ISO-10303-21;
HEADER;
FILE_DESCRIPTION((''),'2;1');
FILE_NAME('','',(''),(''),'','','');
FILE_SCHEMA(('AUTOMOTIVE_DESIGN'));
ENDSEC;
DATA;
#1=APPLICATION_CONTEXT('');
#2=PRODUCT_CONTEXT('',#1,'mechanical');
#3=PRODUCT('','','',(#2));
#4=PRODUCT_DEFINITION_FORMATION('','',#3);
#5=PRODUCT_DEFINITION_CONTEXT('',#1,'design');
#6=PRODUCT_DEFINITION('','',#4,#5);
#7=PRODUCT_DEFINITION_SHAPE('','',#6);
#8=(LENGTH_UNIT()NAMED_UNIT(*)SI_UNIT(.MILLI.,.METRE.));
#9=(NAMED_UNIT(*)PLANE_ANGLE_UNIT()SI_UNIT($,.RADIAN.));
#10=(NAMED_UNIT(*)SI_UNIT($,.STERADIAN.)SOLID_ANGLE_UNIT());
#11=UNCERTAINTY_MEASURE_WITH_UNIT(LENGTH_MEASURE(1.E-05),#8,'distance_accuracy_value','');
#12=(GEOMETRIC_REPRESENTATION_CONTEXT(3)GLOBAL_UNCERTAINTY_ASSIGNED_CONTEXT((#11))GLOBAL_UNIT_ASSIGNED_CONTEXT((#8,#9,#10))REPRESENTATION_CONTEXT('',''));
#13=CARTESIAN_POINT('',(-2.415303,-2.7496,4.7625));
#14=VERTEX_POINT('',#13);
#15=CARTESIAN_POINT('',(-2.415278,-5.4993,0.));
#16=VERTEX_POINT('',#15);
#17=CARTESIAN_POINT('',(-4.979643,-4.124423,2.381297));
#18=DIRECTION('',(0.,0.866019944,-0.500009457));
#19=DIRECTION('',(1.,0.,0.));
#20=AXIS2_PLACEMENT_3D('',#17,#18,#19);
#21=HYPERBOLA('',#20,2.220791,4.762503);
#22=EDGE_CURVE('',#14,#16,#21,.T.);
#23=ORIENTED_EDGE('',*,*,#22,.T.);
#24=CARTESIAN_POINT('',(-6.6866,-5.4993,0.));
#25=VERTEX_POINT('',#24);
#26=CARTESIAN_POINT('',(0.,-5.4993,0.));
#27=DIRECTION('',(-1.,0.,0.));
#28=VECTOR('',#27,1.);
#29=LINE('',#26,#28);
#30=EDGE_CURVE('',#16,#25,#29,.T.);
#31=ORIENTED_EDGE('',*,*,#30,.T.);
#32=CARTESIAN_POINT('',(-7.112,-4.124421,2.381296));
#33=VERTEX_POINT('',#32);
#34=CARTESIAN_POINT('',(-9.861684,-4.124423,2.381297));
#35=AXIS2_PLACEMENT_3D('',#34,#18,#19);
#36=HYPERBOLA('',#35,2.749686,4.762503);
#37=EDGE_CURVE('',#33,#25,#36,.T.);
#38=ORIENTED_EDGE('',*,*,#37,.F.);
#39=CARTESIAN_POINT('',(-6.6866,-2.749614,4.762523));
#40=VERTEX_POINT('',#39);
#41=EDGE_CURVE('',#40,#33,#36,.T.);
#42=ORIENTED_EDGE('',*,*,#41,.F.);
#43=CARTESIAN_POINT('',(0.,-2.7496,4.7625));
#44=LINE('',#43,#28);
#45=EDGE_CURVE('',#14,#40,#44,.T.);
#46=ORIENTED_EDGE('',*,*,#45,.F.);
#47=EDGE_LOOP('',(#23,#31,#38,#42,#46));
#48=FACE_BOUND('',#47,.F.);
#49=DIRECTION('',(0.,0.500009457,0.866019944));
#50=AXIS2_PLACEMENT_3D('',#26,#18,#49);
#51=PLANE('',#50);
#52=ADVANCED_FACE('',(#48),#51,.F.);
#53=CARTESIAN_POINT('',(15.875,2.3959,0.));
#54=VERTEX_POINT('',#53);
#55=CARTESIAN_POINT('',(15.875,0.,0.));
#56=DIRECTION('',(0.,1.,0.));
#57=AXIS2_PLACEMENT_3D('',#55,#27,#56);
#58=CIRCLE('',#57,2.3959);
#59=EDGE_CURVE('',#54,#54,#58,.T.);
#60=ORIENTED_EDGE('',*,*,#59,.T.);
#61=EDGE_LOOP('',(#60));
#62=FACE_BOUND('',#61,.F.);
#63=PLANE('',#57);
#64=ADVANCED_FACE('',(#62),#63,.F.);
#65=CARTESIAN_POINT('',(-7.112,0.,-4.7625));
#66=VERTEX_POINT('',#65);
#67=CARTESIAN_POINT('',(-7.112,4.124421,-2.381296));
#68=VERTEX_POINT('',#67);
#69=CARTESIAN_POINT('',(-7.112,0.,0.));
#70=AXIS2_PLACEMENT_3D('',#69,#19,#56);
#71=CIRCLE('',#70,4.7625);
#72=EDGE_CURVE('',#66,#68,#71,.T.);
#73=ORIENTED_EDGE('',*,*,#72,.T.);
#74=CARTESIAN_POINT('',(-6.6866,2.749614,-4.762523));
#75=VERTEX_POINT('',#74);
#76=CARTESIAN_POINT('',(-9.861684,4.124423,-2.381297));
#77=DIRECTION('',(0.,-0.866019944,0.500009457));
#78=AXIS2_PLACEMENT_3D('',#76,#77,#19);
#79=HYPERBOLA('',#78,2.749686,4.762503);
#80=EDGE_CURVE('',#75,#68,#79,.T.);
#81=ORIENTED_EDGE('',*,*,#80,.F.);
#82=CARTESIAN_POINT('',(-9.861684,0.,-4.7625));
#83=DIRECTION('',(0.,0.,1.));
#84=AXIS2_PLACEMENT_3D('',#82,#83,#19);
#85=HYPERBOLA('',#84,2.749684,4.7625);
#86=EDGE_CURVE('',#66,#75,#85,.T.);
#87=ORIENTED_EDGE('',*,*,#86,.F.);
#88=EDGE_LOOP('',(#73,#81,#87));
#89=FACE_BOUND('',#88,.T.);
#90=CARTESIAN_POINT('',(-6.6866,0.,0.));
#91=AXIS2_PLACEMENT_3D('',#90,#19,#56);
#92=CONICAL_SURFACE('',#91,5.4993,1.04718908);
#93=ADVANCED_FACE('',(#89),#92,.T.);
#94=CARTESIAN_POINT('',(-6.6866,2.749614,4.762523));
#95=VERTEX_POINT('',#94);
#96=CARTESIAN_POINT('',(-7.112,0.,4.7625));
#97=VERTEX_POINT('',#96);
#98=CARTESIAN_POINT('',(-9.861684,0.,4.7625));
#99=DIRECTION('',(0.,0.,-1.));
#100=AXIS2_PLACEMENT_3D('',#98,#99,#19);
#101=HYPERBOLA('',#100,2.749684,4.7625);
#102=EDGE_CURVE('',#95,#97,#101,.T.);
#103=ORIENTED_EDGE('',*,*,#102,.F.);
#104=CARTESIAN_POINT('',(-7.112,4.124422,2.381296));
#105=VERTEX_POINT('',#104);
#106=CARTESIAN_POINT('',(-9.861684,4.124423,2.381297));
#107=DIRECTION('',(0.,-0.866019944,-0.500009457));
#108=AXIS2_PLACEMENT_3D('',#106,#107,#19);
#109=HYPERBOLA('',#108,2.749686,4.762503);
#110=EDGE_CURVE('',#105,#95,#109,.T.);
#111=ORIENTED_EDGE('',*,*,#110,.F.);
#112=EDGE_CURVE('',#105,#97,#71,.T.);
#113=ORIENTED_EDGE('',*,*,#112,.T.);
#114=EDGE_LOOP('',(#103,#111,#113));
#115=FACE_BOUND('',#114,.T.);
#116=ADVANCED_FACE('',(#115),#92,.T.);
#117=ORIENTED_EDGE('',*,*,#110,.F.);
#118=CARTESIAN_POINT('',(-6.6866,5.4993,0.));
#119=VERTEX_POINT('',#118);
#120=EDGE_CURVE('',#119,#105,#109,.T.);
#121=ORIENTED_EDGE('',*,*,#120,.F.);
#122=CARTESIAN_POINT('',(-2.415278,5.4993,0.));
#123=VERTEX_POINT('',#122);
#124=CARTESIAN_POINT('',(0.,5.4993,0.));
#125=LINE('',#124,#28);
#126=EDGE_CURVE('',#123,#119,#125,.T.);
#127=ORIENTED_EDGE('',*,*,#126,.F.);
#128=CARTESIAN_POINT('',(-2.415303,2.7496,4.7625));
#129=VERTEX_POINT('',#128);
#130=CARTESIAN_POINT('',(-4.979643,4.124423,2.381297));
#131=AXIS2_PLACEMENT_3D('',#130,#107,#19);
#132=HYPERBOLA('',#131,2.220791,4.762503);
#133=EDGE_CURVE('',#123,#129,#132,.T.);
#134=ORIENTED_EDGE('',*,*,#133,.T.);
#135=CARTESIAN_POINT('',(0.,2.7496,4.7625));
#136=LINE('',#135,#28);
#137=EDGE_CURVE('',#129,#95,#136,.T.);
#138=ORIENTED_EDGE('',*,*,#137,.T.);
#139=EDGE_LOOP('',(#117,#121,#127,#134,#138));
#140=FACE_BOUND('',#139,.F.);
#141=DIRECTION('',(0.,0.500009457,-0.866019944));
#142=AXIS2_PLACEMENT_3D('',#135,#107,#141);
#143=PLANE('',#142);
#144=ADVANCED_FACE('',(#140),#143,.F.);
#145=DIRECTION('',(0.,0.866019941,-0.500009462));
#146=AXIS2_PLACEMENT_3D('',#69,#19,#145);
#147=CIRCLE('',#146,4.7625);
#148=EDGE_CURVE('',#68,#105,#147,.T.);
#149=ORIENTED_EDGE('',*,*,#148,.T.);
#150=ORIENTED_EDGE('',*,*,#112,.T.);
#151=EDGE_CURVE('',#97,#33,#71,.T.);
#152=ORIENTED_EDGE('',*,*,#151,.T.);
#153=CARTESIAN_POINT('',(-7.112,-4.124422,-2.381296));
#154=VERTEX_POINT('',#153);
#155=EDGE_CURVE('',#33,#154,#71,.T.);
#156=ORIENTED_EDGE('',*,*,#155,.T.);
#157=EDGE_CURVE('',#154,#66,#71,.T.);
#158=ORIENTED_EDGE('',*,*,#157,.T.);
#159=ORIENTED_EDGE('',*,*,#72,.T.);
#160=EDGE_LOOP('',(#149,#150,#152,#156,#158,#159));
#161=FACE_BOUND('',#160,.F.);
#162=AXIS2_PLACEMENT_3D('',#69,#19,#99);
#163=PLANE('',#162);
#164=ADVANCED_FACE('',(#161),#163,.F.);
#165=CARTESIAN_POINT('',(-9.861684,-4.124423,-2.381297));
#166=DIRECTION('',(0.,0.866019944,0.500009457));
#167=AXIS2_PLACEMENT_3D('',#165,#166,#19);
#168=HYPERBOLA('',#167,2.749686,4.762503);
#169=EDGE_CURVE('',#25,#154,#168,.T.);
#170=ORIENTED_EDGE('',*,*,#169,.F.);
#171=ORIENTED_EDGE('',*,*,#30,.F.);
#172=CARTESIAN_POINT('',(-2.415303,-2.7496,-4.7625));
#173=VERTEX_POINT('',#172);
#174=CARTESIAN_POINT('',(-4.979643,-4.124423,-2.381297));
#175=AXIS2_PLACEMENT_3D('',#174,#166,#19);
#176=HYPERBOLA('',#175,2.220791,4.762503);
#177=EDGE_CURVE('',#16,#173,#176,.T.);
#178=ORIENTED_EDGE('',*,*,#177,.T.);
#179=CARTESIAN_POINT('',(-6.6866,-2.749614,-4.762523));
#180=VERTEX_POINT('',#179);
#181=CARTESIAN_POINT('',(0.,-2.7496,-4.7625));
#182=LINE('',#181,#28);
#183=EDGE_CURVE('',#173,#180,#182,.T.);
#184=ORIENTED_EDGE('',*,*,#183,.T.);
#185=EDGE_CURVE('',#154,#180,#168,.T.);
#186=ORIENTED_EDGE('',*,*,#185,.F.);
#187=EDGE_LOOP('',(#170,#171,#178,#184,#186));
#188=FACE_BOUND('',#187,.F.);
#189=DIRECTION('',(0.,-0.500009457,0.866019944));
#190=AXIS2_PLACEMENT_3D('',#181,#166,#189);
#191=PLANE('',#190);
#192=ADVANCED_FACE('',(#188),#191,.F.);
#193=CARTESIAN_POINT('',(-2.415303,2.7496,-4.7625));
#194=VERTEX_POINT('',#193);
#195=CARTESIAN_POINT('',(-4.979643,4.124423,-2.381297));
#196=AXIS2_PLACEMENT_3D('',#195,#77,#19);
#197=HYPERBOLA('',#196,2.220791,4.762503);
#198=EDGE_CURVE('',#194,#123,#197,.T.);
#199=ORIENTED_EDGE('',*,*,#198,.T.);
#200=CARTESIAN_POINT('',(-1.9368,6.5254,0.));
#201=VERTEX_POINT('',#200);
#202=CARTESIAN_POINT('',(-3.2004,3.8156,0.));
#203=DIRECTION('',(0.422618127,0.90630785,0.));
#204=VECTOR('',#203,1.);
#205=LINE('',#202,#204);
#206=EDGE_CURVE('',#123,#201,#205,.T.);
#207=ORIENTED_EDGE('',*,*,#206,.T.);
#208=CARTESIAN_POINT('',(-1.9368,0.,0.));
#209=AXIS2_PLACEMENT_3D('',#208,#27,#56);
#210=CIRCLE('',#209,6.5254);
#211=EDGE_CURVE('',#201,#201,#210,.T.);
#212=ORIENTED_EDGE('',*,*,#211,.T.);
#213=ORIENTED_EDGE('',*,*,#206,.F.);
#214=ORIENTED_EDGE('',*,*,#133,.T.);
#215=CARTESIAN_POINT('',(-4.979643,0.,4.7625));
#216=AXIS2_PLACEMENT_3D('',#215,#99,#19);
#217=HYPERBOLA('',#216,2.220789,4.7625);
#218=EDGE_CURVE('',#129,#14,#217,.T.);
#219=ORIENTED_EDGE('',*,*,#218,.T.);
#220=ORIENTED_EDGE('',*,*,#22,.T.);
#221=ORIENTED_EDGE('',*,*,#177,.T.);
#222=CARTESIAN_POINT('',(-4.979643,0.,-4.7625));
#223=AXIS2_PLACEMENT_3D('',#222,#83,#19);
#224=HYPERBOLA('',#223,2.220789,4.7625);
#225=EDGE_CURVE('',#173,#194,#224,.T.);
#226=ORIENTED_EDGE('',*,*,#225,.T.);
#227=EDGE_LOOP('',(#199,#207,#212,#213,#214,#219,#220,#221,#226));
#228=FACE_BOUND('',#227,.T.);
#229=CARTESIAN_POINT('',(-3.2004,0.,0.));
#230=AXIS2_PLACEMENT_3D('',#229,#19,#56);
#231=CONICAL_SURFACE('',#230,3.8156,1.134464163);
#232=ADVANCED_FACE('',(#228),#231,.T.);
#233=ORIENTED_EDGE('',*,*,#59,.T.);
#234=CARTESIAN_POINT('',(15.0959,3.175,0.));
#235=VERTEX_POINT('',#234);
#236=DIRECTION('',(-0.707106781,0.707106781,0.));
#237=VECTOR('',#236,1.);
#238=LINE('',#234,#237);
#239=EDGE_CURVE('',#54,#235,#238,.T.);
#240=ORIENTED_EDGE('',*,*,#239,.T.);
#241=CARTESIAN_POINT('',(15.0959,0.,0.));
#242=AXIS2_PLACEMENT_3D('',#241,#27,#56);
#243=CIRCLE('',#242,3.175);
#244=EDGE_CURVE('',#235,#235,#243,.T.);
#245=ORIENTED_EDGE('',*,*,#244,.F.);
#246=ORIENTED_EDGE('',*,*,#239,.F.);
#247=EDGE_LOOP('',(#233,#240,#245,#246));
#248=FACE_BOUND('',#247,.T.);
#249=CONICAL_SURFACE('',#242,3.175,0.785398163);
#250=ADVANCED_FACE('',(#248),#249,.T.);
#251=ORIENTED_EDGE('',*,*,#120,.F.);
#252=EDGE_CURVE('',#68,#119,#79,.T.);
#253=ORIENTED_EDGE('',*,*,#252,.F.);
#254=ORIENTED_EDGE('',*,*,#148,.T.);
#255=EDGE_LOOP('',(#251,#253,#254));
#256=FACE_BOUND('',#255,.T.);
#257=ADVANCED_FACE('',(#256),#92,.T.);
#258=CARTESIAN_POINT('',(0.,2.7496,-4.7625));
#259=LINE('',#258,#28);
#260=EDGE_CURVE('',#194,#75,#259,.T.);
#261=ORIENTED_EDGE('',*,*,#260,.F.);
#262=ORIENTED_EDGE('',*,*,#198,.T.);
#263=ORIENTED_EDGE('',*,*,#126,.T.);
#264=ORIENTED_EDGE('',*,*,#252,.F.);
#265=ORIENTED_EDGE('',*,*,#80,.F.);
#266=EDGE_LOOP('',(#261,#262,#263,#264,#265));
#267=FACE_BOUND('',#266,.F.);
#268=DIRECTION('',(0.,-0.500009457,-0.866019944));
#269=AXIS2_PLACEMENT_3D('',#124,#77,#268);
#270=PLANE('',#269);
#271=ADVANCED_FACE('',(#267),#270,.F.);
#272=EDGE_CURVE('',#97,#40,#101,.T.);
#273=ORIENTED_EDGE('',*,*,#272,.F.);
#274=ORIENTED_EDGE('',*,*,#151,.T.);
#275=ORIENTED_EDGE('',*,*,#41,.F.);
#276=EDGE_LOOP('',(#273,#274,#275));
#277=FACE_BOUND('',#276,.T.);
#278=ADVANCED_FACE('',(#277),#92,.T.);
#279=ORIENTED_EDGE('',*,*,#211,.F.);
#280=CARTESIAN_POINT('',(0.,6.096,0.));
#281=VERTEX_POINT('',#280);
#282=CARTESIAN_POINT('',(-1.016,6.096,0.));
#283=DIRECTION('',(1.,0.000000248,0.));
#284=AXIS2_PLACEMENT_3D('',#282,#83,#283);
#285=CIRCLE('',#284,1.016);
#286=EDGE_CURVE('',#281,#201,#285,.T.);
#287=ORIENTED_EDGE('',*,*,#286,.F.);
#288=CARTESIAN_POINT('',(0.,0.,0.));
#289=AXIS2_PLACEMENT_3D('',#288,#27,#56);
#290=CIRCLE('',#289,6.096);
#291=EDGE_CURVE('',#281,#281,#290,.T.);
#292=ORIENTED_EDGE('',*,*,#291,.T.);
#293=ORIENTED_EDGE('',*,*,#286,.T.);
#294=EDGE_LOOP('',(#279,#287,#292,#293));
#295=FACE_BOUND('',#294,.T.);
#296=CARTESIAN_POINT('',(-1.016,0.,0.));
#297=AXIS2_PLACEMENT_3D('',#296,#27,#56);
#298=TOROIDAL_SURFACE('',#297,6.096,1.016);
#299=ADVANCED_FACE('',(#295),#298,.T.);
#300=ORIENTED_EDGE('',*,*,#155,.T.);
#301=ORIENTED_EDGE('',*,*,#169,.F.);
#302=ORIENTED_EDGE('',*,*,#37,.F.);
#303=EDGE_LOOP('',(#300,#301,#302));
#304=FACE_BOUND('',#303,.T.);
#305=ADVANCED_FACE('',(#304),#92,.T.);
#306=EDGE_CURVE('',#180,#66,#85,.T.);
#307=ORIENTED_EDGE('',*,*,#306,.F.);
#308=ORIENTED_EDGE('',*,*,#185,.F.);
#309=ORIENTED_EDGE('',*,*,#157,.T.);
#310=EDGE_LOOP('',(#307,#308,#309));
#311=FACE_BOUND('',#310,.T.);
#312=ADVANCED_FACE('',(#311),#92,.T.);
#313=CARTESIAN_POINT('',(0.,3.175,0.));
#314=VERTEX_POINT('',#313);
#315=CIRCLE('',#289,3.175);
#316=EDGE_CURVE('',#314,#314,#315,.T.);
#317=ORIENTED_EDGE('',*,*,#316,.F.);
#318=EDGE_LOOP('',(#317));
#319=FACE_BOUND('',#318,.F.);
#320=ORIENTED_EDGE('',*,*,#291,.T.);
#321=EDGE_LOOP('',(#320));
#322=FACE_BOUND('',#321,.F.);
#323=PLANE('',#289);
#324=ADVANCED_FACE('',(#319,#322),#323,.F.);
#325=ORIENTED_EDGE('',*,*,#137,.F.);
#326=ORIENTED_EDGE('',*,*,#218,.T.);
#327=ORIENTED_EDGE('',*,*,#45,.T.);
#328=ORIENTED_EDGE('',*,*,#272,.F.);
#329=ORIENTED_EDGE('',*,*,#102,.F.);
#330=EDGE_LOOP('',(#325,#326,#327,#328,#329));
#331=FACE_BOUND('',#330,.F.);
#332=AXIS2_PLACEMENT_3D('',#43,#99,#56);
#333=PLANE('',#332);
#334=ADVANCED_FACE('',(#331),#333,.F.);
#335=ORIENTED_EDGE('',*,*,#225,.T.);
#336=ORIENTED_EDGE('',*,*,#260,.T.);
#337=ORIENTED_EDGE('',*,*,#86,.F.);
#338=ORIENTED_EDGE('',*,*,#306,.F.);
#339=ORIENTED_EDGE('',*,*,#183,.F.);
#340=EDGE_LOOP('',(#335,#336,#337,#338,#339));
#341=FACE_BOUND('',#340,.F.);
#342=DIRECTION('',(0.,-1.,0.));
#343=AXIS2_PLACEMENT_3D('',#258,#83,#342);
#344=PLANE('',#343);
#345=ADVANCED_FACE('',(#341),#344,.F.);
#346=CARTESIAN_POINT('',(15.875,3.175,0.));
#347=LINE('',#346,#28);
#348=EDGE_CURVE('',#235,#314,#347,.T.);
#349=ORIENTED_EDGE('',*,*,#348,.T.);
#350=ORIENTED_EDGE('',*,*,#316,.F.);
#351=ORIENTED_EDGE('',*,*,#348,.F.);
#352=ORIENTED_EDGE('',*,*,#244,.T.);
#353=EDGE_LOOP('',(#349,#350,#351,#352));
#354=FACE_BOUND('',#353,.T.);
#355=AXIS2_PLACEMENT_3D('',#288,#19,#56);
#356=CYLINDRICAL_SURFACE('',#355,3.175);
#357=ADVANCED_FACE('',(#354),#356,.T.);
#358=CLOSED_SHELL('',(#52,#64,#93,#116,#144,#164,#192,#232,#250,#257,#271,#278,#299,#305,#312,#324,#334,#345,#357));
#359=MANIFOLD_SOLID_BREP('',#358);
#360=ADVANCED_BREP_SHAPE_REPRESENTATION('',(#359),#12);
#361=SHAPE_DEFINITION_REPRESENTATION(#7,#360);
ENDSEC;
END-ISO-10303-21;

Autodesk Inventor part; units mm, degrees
ref_plane "YZ Plane" through (0, 0, 0) normal (1, 0, 0) x (0, 1, 0)
ref_plane "XZ Plane" through (0, 0, 0) normal (0, 1, 0) x (-1, 0, 0)
sketch "Sketch1" plane through (0, 0, 0) normal (0, 0, 1) x (1, 0, 0)
  line L0 (-3.2004, 0) -> (-3.2004, 3.8156)
  line L1 (0, 6.096) -> (0, 3.175)
  line L2 (4.1148, 3.175) -> (15.875, 3.175)
  line L3 (15.875, 3.175) -> (15.875, 0)
  line L4 (15.875, 0) -> (-3.2004, 0)
  arc A0 (0, 6.096) -> (-1.9368, 6.5254) centre (-1.016, 6.096) ccw
  line L5 (0, -1.4605) -> (0, 8.7631) projected
  line L6 (-7.0155, 0) -> (19.6901, 0) projected
  line L7 (0, 3.175) -> (0.0001, 3.175)
  line L8 (0.0001, 3.175) -> (0.0001, 3.175)
  line L9 (0.0001, 3.175) -> (2.2098, 3.175)
  line L10 (2.2098, 3.175) -> (4.1148, 3.175)
  line L11 (-3.2004, 3.8156) -> (-1.9368, 6.5254)
  line L12 (0.0001, 3.175) -> (4.1148, 3.175) construction
  line L13 (4.1148, 3.175) -> (4.1148, 0) construction
  dimension "d0" = 1.016
  dimension "d1" = 15.875
  dimension "d2" = 11.7602
  dimension "d3" = 14.224
  dimension "d4" = 6.35
  dimension "d5" = 3.2004
  dimension "d15" = 6.35
  dimension "d16" = 6.35
  dimension "d17" = 0.0001
  dimension "d18" = 1.905
  dimension "d19" = 25
revolve "Body" add sketch "Sketch1" angle 360 about axis through (15.875, 0, 0) along (-1, 0, 0)
sketch "Sketch2" plane through (0, 0, 0) normal (1, 0, 0) x (0, 0, -1)
  line L0 (4.7625, 2.7496) -> (4.7625, -2.7496)
  line L1 (4.7625, -2.7496) -> (0, -5.4993)
  line L2 (0, -5.4993) -> (-4.7625, -2.7496)
  line L3 (-4.7625, -2.7496) -> (-4.7625, 2.7496)
  line L4 (-4.7625, 2.7496) -> (0, 5.4993)
  line L5 (0, 5.4993) -> (4.7625, 2.7496)
  point P0 (0, 0)
  point P1 (0, 0)
  dimension "d23" = 9.525
extrude "Head" add sketch "Sketch2" against normal blind 7.112
sketch "Sketch3" plane through (0, 0, 0) normal (0, 0, 1) x (1, 0, 0)
  line L0 (-7.112, 4.7625) -> (-7.112, 5.4993)
  line L1 (-7.112, 5.4993) -> (-6.6866, 5.4993)
  line L2 (-6.6866, 5.4993) -> (-7.112, 4.7625)
  line L3 (-8.0513, 0) -> (-1.476, 0) projected
  line L4 (-7.112, 5.4993) -> (-7.112, 2.7496) projected
  line L5 (-2.4153, 5.4993) -> (-7.112, 5.4993) projected
  point P0 (-7.112, 2.7496)
  dimension "d8" = 30
  dimension "d22" = 9.525
revolve "Chamfer1" cut sketch "Sketch3" angle 360 about axis through (-10, 0, 0) along (1, 0, 0)
thread "Thread" size "1/4-20 UNC" class "2A" standard "ANSI Unified Screw Threads" length 11.7602
chamfer "Chamfer2" distance 0.7791 distance2 0.7791 1 edges at (15.875, -3.175, 0) measured on face at (15.875, 0.0371, -1.7957)
ref_plane "Work Plane1" through (10.95, 0, 0) normal (0, 0, -1) x (1, 0, 0)
equation "\"d23\" = SW"
equation "\"d6\" = KOH"
equation "\"d10\" = GEL"
equation "\"d13\" = -0.5 * SPD + 0.5 * GD"
equation "\"d14\" = GUL"
equation "\"d0\" = PHH"
equation "\"d1\" = NLG"
equation "\"d2\" = GEL"
equation "\"d3\" = LADI"
equation "\"d4\" = GD"
equation "\"d5\" = 0.45 * KOH"
equation "\"d15\" = SD2"
equation "\"d16\" = BDM"
equation "\"d18\" = GAL"
equation "\"d19\" = KEWI"
equation "\"d8\" = ANG1"
equation "\"d22\" = SW0"
equation "\"NLG\" = 15.875"
equation "\"GD\" = NND"
equation "\"BDM\" = NND"
equation "\"KOH\" = 7.112"
equation "\"GEL\" = 11.7602"
equation "\"LADI\" = 14.224"
equation "\"SW\" = 9.525"
equation "\"PHH\" = 1.016"
equation "\"SW0\" = SW"
equation "\"SPD\" = 4.79184"
equation "\"SD2\" = NND"
equation "\"SD\" = 0"
equation "\"ANG1\" = 30deg"
equation "\"KEWI\" = 25deg"
equation "\"GAL\" = 1.905"
equation "\"GUL\" = 0.77908"
equation "\"THREADDIA\" = 6.35"
equation "\"SDH\" = SW"
equation "\"TOA\" = 30deg"
equation "\"NND\" = 6.35"
equation "\"E0\" = 1.155 * SW"
equation "\"GD1\" = 4.79184"
properties part number "92979A114" material "Steel, Mild"
